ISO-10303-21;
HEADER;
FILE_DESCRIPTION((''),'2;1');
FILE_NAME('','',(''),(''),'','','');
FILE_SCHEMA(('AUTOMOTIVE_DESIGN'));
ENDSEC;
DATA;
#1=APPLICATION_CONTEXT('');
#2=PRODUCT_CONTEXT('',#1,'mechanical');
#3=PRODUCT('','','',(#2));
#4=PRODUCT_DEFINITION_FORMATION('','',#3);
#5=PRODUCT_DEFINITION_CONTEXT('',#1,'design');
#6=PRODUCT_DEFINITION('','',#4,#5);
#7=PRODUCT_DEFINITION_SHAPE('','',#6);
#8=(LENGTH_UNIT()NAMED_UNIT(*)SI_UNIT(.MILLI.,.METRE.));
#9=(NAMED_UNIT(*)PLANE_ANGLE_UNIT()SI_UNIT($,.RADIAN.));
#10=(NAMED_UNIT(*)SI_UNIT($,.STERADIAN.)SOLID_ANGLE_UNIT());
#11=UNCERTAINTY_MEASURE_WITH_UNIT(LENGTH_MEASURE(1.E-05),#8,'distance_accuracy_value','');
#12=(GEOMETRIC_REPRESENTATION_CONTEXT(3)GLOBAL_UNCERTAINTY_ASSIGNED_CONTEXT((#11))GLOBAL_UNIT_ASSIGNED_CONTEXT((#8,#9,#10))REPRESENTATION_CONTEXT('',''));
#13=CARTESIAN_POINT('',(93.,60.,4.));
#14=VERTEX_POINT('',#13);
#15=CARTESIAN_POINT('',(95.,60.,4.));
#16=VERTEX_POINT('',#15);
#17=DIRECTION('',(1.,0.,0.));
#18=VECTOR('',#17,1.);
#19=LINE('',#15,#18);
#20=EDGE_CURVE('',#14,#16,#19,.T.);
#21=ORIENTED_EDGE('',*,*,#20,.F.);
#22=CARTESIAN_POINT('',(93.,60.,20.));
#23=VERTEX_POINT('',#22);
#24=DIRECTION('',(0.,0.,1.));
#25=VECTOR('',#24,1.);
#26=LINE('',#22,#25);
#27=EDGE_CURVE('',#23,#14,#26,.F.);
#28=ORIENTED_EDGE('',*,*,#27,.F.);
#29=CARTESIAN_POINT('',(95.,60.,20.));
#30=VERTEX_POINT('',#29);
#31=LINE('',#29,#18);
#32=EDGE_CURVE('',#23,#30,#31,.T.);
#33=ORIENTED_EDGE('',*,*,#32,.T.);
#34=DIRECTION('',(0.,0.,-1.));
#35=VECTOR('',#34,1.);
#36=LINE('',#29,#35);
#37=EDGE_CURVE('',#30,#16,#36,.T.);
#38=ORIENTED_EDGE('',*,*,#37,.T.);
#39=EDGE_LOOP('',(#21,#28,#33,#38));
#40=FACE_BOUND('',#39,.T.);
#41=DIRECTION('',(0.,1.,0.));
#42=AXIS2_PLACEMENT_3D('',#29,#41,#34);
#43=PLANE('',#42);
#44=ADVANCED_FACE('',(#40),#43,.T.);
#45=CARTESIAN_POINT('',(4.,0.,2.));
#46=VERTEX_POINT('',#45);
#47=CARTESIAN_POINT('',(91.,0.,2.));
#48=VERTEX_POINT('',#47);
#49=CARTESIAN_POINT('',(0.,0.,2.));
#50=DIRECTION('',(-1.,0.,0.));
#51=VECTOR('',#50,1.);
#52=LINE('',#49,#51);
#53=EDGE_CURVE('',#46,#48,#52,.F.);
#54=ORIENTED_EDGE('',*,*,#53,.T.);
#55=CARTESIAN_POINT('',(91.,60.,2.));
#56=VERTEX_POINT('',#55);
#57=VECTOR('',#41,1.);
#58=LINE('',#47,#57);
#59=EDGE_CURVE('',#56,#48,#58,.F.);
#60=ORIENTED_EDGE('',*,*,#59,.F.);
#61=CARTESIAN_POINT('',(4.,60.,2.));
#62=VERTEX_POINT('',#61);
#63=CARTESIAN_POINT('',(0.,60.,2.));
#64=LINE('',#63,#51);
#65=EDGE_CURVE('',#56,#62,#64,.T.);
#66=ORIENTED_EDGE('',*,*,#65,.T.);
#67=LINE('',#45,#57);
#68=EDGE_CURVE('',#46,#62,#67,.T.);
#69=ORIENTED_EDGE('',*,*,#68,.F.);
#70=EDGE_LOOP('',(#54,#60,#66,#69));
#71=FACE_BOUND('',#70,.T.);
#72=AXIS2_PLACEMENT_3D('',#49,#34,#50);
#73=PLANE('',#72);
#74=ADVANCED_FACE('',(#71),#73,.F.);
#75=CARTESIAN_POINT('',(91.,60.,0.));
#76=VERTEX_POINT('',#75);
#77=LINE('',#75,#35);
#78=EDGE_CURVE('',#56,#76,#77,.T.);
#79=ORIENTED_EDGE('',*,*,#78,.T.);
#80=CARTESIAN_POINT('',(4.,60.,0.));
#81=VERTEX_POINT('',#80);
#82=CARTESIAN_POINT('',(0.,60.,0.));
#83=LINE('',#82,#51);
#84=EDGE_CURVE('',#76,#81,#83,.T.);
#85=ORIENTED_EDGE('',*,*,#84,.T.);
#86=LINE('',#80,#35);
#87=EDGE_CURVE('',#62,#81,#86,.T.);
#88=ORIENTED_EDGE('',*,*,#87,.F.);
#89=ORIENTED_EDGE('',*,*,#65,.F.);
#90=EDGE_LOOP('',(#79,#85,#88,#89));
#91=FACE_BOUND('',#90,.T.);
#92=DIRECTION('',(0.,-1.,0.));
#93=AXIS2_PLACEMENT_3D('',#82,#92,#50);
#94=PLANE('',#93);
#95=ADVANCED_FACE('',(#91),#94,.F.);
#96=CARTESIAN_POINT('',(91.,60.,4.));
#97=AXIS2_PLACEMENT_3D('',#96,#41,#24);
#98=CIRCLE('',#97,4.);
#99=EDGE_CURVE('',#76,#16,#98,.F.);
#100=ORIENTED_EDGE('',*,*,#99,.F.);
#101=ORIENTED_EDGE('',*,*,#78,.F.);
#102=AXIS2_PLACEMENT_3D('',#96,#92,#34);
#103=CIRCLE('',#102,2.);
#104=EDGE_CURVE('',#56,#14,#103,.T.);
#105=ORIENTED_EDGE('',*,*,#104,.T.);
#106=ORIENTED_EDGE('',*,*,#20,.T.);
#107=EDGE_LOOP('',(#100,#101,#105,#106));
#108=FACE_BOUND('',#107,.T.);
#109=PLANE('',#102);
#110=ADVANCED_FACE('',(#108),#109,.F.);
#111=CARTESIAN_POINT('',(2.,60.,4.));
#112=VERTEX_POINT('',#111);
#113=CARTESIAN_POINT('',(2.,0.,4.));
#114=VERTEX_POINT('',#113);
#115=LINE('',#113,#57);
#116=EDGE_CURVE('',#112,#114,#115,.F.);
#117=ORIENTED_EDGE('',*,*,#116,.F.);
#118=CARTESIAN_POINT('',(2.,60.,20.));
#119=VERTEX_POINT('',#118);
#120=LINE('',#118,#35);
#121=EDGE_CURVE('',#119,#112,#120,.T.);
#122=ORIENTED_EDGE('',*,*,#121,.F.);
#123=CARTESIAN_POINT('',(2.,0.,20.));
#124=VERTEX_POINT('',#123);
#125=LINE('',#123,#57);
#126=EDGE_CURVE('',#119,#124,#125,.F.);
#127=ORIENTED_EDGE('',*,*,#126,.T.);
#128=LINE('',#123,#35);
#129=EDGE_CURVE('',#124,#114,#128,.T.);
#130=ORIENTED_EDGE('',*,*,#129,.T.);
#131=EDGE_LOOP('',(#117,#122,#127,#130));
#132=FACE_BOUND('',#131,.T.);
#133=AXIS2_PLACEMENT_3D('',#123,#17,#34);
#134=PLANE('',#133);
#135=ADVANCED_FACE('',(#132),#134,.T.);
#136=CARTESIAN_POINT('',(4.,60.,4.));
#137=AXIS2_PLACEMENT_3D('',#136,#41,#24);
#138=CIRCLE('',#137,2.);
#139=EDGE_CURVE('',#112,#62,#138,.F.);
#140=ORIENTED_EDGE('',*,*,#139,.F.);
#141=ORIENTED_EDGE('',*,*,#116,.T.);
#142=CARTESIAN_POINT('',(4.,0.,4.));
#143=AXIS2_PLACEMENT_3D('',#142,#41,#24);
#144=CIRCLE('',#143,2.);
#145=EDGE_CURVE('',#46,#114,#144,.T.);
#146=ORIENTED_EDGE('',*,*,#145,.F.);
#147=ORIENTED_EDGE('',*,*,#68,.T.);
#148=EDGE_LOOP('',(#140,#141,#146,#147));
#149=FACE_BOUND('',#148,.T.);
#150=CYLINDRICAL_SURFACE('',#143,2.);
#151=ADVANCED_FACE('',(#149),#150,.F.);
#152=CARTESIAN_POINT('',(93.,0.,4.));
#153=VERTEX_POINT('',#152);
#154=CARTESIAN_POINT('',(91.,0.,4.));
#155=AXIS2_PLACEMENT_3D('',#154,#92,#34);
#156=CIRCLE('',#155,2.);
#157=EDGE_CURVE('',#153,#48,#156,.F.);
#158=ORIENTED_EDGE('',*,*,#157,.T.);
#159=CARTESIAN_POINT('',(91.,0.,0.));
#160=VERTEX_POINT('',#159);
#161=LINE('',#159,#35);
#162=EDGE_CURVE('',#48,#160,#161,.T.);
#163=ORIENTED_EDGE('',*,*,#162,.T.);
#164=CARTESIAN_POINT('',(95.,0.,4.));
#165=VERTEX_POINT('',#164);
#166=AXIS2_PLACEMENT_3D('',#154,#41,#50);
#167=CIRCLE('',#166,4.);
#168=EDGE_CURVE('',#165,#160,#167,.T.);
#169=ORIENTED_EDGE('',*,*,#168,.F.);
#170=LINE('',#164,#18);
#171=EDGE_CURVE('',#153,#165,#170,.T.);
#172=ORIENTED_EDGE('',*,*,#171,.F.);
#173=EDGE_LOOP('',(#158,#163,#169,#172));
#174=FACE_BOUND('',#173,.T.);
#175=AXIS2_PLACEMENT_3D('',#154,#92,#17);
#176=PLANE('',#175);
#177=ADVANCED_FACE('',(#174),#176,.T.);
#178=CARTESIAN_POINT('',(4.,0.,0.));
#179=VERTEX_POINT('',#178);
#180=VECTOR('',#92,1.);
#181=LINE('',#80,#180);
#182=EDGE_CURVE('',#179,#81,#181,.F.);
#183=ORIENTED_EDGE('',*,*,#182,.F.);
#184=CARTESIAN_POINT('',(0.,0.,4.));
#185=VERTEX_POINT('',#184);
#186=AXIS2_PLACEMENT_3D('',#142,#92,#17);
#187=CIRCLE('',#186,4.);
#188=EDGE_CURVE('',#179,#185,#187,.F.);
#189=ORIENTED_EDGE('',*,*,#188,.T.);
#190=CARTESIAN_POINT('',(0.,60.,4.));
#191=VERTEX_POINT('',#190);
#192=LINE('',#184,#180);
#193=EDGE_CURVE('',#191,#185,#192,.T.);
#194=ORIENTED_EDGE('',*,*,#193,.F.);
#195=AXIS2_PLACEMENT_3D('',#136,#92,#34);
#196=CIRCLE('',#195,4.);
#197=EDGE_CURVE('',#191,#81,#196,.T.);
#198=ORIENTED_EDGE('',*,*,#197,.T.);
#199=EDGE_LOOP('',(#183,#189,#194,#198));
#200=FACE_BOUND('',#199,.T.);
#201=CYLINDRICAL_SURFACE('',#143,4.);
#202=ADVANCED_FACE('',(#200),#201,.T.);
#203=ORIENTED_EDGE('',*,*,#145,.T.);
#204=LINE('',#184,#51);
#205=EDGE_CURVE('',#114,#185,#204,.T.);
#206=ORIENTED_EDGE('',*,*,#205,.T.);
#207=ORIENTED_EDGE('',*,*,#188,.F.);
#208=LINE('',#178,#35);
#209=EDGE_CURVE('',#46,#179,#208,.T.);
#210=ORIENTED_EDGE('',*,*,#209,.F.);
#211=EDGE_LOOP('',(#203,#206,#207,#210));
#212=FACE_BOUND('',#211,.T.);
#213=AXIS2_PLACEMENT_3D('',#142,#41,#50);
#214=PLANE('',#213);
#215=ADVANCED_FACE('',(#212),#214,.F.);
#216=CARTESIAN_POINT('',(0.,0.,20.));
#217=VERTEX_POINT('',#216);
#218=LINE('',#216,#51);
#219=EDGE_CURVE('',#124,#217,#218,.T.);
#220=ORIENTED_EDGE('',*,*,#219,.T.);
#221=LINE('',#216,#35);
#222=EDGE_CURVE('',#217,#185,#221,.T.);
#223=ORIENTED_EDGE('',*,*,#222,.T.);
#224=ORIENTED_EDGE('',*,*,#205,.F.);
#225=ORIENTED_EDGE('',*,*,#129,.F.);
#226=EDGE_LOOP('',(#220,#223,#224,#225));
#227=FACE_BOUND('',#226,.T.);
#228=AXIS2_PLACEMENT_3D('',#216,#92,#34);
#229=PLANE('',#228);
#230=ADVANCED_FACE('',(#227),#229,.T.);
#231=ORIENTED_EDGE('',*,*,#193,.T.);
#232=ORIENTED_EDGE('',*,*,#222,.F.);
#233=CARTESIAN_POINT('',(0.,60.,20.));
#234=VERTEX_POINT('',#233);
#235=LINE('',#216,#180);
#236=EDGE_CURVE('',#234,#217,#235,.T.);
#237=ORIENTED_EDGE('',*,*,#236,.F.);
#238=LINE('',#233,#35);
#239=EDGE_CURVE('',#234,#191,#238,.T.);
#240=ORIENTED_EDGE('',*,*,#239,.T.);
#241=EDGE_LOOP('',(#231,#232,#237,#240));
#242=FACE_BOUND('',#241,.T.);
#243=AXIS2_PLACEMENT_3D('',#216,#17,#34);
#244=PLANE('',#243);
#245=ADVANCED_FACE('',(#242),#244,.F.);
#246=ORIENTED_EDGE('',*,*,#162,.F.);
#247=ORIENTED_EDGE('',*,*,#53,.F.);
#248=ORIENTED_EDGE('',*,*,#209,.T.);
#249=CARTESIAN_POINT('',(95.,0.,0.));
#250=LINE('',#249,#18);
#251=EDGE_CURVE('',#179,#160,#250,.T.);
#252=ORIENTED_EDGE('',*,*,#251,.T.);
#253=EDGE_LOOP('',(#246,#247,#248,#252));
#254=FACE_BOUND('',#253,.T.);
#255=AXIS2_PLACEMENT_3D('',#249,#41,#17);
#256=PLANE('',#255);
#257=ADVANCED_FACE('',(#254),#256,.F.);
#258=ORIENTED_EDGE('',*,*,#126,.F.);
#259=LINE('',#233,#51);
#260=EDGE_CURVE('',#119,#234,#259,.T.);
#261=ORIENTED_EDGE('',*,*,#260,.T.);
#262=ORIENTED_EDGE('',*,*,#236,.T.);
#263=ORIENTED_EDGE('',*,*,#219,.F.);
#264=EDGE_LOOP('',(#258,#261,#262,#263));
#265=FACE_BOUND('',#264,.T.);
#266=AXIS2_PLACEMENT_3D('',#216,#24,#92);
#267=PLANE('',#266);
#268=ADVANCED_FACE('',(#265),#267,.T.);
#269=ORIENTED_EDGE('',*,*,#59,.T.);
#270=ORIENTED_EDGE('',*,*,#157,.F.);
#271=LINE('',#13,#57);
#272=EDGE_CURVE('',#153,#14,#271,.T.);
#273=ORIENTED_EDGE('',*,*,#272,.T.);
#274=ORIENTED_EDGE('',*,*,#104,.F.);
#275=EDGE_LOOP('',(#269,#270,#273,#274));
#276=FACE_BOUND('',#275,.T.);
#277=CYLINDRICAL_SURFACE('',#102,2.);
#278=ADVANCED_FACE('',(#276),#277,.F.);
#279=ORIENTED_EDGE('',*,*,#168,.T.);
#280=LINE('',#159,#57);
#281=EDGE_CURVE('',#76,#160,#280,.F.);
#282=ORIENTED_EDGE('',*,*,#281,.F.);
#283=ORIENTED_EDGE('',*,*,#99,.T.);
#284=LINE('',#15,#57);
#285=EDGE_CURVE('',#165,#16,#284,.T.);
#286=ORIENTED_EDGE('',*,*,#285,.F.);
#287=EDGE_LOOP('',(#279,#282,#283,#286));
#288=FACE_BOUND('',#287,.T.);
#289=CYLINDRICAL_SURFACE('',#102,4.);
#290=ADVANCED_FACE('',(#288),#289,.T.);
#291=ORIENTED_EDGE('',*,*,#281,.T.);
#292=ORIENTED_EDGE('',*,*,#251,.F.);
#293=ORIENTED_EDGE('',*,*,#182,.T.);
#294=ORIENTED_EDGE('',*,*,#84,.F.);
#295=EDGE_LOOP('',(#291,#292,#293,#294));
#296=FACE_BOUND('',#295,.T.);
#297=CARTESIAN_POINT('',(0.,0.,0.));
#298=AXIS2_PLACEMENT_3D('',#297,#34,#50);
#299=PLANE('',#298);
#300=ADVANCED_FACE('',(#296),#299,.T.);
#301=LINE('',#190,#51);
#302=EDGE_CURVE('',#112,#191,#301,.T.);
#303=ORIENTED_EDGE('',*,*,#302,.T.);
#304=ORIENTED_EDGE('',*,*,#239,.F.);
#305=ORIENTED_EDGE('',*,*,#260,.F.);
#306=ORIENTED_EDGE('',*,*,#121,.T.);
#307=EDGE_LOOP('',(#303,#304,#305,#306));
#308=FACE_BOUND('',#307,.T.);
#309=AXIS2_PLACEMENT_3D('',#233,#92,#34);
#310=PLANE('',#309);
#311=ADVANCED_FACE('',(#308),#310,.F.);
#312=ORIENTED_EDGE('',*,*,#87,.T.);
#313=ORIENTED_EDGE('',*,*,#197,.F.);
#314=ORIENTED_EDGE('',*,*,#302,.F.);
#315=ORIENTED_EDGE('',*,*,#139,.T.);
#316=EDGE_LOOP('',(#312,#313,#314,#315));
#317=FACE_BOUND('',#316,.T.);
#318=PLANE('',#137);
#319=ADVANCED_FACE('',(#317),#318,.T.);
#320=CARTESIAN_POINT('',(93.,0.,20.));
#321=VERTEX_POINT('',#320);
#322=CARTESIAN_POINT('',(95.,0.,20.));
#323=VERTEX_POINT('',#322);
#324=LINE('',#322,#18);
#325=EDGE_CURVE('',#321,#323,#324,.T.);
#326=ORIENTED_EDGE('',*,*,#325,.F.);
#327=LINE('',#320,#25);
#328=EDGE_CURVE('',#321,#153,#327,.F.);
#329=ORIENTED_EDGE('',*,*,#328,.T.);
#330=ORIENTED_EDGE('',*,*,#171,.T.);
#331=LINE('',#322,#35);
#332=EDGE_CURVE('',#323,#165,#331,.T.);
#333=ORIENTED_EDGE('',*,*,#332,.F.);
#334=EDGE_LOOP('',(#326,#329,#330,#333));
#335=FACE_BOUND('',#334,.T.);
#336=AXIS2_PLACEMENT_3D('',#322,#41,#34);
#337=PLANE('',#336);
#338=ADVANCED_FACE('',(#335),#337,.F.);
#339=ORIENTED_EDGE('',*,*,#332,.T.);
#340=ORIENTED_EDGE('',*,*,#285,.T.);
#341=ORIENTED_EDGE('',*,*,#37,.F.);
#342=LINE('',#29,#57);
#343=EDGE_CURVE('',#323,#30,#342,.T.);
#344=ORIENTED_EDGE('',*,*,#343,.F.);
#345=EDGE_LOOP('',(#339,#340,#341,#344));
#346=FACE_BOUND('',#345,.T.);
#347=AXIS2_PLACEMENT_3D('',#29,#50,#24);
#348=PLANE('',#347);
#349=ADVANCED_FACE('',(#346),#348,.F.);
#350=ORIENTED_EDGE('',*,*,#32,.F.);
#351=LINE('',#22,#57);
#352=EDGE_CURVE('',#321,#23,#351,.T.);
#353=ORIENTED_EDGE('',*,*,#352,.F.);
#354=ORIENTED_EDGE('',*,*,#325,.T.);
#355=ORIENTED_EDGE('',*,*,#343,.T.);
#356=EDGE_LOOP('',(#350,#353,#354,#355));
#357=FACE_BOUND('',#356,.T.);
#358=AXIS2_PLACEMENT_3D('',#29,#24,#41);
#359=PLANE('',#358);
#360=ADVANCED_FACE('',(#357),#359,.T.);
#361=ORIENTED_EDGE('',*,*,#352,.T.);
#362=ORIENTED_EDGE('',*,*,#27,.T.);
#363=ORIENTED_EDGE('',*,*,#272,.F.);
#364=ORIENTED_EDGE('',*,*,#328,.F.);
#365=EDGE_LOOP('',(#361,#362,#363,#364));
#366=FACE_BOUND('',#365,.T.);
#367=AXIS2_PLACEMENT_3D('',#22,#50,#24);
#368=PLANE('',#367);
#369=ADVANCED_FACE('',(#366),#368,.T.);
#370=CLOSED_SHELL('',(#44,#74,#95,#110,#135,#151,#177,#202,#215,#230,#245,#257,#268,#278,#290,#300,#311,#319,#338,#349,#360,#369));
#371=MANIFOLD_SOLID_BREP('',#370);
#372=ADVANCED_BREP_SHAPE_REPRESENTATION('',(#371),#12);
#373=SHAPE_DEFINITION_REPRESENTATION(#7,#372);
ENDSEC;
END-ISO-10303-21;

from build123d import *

# Parameters (mm, degrees)
SZKIC1_W                    = 95
SZKIC1_H                    = 60
DODANIE_WYCI_GNI_CIE1_DEPTH = 20
KONWERTUJ_BRY_1_DEPTH       = 60


# Read off the part's stored shape, not the designer's step: Konwertuj bryłę1
with BuildPart() as part:
    # Szkic1 → Dodanie-wyciągnięcie1 (new body)
    with BuildSketch(Plane.XY):
        with Locations((47.5, 30)):
            Rectangle(SZKIC1_W, SZKIC1_H)
    extrude(amount=DODANIE_WYCI_GNI_CIE1_DEPTH)

    # Konwertuj bryłę1 outline → Konwertuj bryłę1 (cut)
    with BuildSketch(Plane(origin=(0, 0, 0), x_dir=(1, 0, 0), z_dir=(0, 1, 0))):
        with BuildLine():
            Line((95, 0), (91, 0))
            ThreePointArc((91, 0), (93.828427125, -1.171572875), (95, -4))
            Line((95, -4), (95, 0))
        make_face()
        with BuildLine():
            ThreePointArc((0, -4), (1.171572875, -1.171572875), (4, 0))
            Line((4, 0), (0, 0))
            Line((0, 0), (0, -4))
        make_face()
        with BuildLine():
            Line((2, -20), (93, -20))
            Line((93, -20), (93, -4))
            ThreePointArc((93, -4), (92.414213562, -2.585786438), (91, -2))
            Line((91, -2), (4, -2))
            ThreePointArc((4, -2), (2.585786438, -2.585786438), (2, -4))
            Line((2, -4), (2, -20))
        make_face()
    extrude(amount=KONWERTUJ_BRY_1_DEPTH, mode=Mode.SUBTRACT)


solid = part.part
